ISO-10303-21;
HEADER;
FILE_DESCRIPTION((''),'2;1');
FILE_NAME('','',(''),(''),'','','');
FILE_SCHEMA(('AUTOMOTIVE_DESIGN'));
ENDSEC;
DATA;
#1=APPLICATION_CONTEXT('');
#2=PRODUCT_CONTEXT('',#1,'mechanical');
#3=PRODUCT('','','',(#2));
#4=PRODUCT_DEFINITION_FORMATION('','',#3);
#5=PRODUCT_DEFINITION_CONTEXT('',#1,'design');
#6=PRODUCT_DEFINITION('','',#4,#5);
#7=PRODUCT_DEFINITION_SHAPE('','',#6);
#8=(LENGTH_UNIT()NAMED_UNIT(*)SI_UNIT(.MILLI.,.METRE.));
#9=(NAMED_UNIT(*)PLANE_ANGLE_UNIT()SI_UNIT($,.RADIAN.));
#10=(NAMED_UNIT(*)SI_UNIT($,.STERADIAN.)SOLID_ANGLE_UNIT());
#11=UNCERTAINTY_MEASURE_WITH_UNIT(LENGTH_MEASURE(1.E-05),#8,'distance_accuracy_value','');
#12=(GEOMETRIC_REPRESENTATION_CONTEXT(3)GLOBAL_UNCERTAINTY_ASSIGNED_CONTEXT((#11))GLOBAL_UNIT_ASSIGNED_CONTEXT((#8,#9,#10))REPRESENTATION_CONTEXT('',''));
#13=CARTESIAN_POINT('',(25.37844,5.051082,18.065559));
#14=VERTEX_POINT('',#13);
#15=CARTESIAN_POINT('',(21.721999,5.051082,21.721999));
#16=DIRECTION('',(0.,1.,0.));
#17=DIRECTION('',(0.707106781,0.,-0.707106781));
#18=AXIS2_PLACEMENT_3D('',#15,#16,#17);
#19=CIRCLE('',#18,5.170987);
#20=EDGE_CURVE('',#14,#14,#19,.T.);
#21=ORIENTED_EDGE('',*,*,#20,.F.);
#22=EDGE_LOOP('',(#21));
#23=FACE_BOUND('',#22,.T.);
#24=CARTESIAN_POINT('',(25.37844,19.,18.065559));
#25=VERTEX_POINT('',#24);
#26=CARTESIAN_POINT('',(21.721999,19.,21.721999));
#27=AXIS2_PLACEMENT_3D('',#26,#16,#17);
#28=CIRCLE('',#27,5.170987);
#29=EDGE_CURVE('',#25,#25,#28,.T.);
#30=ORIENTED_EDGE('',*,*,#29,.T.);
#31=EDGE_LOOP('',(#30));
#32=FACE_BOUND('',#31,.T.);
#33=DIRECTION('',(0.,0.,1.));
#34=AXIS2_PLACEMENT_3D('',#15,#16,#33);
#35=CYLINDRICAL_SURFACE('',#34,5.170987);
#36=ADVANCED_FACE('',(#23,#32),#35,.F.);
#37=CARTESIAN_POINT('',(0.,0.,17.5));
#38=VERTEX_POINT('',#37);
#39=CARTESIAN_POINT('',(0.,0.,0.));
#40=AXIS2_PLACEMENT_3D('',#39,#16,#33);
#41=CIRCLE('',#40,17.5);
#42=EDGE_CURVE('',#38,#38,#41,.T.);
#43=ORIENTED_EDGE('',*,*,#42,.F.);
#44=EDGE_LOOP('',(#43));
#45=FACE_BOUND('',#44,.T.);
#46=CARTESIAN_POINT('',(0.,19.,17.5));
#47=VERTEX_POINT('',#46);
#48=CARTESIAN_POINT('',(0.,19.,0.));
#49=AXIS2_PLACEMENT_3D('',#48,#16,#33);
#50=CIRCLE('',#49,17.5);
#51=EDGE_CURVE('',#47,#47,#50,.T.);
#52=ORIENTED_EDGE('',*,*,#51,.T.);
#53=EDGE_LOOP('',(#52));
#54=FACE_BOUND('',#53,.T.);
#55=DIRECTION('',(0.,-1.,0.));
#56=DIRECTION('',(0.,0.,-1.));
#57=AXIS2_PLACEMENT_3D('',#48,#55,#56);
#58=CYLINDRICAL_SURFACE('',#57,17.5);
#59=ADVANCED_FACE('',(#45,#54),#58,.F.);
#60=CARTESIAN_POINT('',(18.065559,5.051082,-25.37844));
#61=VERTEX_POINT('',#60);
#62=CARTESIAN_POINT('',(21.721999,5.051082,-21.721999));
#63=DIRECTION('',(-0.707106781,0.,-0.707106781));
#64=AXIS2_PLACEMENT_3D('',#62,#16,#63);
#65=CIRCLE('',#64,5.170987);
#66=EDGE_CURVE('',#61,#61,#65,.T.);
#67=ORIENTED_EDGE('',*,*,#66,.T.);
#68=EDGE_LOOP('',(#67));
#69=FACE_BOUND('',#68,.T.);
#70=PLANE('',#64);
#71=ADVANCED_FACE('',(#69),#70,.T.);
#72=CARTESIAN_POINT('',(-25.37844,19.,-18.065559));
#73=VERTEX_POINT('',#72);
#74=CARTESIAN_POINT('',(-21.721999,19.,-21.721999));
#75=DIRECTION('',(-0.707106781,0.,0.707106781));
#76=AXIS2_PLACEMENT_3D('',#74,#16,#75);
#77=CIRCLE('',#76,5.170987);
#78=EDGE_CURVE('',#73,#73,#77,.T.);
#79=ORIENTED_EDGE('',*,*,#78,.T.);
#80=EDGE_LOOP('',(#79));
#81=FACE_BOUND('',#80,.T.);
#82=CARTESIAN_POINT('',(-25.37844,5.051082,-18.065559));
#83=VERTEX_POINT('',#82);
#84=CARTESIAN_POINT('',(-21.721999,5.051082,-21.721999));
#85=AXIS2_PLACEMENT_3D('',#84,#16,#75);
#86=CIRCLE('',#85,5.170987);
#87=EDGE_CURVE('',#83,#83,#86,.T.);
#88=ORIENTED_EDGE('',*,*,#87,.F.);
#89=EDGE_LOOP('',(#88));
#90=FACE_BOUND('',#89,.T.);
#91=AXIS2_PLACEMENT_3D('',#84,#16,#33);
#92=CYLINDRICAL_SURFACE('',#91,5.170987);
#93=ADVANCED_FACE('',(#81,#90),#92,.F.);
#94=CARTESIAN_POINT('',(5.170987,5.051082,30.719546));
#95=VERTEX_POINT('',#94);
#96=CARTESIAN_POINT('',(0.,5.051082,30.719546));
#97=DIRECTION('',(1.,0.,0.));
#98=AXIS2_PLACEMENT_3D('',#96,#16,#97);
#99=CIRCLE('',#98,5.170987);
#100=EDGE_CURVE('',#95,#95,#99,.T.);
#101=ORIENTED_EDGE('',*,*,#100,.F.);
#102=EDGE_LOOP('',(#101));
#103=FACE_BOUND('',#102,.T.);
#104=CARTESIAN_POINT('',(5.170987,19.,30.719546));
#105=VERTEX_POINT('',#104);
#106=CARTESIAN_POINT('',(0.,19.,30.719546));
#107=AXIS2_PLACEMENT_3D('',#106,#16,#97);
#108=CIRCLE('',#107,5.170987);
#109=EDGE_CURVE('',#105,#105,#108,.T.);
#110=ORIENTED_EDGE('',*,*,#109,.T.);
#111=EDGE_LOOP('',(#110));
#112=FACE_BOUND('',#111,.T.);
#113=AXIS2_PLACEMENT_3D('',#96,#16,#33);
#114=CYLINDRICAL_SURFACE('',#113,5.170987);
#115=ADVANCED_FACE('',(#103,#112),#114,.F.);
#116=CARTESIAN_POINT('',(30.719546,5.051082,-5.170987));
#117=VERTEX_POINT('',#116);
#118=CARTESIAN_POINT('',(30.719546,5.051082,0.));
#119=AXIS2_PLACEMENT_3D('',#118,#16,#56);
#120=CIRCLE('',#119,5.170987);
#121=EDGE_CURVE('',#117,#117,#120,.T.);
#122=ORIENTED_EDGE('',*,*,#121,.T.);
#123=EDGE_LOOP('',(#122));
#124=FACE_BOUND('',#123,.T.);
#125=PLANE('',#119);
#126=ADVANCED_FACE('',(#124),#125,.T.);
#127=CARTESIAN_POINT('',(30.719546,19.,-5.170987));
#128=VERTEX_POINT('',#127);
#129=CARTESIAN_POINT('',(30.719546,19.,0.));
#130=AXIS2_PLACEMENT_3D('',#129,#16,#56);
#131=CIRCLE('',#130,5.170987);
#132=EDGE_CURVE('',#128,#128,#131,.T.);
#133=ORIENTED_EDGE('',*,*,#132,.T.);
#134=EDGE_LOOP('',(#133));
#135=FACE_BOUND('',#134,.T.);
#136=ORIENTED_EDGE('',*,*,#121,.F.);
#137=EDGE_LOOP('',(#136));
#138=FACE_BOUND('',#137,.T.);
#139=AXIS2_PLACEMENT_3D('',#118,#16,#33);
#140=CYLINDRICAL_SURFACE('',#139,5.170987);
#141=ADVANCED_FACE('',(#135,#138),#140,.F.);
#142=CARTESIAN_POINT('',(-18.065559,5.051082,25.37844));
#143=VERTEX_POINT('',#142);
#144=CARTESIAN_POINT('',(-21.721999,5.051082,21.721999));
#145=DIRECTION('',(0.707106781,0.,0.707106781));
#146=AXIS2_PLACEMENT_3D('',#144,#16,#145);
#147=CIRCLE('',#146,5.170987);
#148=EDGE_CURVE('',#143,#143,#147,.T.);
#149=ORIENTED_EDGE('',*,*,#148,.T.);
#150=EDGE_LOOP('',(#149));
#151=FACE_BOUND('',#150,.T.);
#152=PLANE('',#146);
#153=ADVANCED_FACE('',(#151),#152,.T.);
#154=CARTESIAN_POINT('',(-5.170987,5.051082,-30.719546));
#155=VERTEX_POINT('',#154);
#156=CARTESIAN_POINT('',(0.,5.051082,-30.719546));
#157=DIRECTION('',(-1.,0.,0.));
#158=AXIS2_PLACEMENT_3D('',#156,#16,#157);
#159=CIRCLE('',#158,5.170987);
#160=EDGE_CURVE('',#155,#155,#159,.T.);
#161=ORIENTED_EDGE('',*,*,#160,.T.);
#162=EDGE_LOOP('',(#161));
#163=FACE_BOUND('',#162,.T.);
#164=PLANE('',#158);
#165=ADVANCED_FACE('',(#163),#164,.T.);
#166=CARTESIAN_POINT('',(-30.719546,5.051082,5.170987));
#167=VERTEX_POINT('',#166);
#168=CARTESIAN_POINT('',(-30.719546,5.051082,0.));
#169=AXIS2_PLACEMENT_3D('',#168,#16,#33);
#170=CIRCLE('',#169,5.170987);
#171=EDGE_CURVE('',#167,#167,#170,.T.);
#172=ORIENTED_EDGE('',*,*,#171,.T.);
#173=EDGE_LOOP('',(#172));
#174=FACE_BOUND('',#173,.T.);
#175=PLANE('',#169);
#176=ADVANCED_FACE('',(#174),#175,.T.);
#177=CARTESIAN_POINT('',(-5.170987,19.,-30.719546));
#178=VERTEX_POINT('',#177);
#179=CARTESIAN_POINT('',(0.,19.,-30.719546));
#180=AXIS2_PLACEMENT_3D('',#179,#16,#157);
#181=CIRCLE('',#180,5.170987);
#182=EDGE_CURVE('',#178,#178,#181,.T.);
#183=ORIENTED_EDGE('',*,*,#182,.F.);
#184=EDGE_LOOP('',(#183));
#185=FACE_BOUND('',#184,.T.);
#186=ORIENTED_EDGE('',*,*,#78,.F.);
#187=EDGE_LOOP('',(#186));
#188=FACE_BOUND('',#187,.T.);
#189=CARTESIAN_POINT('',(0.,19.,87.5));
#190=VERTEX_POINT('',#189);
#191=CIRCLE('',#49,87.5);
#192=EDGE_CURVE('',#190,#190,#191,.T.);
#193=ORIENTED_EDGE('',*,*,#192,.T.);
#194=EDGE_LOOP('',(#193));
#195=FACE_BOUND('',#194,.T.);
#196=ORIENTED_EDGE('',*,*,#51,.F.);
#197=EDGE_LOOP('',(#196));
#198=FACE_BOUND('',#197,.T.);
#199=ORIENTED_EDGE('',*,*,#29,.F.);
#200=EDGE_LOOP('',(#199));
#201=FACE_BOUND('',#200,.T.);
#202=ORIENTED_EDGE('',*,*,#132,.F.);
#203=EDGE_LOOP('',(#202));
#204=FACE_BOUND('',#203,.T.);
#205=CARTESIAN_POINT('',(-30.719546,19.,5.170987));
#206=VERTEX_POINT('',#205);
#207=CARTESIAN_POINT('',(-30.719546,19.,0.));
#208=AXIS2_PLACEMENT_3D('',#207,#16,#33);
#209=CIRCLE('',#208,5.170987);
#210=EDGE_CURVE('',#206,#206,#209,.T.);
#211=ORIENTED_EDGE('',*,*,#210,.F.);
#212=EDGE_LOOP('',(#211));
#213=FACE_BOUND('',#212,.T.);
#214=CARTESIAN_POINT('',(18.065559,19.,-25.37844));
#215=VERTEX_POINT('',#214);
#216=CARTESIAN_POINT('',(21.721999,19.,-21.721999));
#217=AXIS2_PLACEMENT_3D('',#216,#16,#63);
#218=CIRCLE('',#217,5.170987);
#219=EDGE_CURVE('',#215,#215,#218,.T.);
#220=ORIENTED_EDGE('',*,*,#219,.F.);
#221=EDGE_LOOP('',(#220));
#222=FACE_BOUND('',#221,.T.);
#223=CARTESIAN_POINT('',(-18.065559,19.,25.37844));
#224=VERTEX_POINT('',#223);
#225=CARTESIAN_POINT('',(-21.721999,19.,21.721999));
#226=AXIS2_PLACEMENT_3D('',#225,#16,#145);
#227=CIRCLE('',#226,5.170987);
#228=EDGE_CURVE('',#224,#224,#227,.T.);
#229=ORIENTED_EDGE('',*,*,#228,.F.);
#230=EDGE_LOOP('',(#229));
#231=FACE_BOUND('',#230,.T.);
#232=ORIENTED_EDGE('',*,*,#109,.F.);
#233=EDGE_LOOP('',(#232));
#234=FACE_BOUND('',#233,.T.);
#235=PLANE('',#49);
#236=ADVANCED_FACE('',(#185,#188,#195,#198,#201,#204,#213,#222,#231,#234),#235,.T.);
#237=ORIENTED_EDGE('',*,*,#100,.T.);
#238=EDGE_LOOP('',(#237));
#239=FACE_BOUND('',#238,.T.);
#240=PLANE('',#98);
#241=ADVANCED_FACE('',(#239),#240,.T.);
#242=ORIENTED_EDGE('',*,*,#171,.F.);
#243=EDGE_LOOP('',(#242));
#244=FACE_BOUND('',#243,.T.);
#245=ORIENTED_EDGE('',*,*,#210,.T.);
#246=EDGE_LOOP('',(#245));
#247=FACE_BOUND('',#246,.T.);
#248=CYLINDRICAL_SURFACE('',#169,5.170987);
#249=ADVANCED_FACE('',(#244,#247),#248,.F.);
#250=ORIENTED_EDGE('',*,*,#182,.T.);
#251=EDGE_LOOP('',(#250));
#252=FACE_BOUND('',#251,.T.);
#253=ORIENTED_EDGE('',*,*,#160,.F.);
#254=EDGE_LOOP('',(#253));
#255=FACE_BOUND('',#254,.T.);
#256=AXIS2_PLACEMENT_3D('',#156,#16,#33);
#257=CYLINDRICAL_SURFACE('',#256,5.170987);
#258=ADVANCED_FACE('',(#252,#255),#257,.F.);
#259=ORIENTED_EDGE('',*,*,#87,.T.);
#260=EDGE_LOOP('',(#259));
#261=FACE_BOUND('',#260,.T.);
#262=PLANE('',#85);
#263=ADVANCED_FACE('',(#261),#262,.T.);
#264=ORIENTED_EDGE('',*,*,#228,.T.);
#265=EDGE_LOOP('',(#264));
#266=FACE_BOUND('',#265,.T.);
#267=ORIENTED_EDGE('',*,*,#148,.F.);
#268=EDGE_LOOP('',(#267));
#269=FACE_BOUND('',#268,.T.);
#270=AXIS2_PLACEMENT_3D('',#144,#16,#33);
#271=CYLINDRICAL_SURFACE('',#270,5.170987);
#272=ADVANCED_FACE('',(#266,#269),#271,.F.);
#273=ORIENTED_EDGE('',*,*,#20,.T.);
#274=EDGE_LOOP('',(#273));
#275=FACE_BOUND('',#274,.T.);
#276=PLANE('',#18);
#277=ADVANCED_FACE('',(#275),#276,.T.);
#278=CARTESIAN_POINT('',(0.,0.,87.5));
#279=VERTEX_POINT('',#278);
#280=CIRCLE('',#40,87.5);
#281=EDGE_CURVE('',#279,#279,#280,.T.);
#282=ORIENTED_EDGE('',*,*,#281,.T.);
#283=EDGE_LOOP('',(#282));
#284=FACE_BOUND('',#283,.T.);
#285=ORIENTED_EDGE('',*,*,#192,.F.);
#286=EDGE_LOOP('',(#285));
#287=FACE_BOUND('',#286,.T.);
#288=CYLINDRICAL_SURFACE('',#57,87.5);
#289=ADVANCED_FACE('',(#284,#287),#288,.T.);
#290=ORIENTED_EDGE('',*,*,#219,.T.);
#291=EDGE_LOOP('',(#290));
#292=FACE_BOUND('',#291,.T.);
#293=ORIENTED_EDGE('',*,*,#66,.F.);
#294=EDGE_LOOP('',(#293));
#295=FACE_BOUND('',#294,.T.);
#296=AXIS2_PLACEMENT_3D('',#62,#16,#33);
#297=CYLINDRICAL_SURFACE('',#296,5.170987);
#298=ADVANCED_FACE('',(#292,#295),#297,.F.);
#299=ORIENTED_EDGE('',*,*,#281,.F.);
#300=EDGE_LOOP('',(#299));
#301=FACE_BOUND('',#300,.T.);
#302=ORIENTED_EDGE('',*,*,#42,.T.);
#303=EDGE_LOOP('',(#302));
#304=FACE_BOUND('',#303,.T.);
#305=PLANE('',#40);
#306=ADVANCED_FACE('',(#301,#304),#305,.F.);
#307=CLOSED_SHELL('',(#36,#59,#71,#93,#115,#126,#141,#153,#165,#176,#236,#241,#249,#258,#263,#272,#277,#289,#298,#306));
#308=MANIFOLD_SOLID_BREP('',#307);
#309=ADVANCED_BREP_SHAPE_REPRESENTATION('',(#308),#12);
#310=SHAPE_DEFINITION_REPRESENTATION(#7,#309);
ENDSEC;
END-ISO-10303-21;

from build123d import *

# Parameters (mm, degrees)
SKETCH1_R           = 87.5
BOSS_EXTRUDE1_DEPTH = 19
SKETCH2_R           = 17.5
CUT_EXTRUDE1_DEPTH  = 126.193849689
SKETCH3_R           = 5.170987345
CUT_EXTRUDE2_DEPTH  = 13.948918479
CIRPATTERN1_COUNT   = 8


with BuildPart() as part:
    # Sketch1 → Boss-Extrude1 (new body)
    with BuildSketch(Plane(origin=(0, 0, 0), x_dir=(1, 0, 0), z_dir=(0, 1, 0))):
        Circle(SKETCH1_R)
    extrude(amount=BOSS_EXTRUDE1_DEPTH)

    # Sketch2 → Cut-Extrude1 (cut, through all)
    with BuildSketch(Plane(origin=(0, 0, 0), x_dir=(1, 0, 0), z_dir=(0, 1, 0))):
        Circle(SKETCH2_R)
    extrude(amount=CUT_EXTRUDE1_DEPTH, mode=Mode.SUBTRACT)

    # Sketch3 → Cut-Extrude2 (cut)
    with BuildSketch(Plane(origin=(0, 19, 0), x_dir=(1, 0, 0), z_dir=(0, 1, 0))):
        with Locations((-30.719546179, 0)):
            Circle(SKETCH3_R)
    cut_extrude2 = extrude(amount=-CUT_EXTRUDE2_DEPTH, mode=Mode.SUBTRACT)

    # CirPattern1: Cut-Extrude2 ×8 about axis
    cirpattern1_axis = Axis((0, 0, 0), (0, 1, 0))
    for i in range(1, CIRPATTERN1_COUNT):
        add(cut_extrude2.rotate(cirpattern1_axis, i * 360 / CIRPATTERN1_COUNT), mode=Mode.SUBTRACT)


solid = part.part
